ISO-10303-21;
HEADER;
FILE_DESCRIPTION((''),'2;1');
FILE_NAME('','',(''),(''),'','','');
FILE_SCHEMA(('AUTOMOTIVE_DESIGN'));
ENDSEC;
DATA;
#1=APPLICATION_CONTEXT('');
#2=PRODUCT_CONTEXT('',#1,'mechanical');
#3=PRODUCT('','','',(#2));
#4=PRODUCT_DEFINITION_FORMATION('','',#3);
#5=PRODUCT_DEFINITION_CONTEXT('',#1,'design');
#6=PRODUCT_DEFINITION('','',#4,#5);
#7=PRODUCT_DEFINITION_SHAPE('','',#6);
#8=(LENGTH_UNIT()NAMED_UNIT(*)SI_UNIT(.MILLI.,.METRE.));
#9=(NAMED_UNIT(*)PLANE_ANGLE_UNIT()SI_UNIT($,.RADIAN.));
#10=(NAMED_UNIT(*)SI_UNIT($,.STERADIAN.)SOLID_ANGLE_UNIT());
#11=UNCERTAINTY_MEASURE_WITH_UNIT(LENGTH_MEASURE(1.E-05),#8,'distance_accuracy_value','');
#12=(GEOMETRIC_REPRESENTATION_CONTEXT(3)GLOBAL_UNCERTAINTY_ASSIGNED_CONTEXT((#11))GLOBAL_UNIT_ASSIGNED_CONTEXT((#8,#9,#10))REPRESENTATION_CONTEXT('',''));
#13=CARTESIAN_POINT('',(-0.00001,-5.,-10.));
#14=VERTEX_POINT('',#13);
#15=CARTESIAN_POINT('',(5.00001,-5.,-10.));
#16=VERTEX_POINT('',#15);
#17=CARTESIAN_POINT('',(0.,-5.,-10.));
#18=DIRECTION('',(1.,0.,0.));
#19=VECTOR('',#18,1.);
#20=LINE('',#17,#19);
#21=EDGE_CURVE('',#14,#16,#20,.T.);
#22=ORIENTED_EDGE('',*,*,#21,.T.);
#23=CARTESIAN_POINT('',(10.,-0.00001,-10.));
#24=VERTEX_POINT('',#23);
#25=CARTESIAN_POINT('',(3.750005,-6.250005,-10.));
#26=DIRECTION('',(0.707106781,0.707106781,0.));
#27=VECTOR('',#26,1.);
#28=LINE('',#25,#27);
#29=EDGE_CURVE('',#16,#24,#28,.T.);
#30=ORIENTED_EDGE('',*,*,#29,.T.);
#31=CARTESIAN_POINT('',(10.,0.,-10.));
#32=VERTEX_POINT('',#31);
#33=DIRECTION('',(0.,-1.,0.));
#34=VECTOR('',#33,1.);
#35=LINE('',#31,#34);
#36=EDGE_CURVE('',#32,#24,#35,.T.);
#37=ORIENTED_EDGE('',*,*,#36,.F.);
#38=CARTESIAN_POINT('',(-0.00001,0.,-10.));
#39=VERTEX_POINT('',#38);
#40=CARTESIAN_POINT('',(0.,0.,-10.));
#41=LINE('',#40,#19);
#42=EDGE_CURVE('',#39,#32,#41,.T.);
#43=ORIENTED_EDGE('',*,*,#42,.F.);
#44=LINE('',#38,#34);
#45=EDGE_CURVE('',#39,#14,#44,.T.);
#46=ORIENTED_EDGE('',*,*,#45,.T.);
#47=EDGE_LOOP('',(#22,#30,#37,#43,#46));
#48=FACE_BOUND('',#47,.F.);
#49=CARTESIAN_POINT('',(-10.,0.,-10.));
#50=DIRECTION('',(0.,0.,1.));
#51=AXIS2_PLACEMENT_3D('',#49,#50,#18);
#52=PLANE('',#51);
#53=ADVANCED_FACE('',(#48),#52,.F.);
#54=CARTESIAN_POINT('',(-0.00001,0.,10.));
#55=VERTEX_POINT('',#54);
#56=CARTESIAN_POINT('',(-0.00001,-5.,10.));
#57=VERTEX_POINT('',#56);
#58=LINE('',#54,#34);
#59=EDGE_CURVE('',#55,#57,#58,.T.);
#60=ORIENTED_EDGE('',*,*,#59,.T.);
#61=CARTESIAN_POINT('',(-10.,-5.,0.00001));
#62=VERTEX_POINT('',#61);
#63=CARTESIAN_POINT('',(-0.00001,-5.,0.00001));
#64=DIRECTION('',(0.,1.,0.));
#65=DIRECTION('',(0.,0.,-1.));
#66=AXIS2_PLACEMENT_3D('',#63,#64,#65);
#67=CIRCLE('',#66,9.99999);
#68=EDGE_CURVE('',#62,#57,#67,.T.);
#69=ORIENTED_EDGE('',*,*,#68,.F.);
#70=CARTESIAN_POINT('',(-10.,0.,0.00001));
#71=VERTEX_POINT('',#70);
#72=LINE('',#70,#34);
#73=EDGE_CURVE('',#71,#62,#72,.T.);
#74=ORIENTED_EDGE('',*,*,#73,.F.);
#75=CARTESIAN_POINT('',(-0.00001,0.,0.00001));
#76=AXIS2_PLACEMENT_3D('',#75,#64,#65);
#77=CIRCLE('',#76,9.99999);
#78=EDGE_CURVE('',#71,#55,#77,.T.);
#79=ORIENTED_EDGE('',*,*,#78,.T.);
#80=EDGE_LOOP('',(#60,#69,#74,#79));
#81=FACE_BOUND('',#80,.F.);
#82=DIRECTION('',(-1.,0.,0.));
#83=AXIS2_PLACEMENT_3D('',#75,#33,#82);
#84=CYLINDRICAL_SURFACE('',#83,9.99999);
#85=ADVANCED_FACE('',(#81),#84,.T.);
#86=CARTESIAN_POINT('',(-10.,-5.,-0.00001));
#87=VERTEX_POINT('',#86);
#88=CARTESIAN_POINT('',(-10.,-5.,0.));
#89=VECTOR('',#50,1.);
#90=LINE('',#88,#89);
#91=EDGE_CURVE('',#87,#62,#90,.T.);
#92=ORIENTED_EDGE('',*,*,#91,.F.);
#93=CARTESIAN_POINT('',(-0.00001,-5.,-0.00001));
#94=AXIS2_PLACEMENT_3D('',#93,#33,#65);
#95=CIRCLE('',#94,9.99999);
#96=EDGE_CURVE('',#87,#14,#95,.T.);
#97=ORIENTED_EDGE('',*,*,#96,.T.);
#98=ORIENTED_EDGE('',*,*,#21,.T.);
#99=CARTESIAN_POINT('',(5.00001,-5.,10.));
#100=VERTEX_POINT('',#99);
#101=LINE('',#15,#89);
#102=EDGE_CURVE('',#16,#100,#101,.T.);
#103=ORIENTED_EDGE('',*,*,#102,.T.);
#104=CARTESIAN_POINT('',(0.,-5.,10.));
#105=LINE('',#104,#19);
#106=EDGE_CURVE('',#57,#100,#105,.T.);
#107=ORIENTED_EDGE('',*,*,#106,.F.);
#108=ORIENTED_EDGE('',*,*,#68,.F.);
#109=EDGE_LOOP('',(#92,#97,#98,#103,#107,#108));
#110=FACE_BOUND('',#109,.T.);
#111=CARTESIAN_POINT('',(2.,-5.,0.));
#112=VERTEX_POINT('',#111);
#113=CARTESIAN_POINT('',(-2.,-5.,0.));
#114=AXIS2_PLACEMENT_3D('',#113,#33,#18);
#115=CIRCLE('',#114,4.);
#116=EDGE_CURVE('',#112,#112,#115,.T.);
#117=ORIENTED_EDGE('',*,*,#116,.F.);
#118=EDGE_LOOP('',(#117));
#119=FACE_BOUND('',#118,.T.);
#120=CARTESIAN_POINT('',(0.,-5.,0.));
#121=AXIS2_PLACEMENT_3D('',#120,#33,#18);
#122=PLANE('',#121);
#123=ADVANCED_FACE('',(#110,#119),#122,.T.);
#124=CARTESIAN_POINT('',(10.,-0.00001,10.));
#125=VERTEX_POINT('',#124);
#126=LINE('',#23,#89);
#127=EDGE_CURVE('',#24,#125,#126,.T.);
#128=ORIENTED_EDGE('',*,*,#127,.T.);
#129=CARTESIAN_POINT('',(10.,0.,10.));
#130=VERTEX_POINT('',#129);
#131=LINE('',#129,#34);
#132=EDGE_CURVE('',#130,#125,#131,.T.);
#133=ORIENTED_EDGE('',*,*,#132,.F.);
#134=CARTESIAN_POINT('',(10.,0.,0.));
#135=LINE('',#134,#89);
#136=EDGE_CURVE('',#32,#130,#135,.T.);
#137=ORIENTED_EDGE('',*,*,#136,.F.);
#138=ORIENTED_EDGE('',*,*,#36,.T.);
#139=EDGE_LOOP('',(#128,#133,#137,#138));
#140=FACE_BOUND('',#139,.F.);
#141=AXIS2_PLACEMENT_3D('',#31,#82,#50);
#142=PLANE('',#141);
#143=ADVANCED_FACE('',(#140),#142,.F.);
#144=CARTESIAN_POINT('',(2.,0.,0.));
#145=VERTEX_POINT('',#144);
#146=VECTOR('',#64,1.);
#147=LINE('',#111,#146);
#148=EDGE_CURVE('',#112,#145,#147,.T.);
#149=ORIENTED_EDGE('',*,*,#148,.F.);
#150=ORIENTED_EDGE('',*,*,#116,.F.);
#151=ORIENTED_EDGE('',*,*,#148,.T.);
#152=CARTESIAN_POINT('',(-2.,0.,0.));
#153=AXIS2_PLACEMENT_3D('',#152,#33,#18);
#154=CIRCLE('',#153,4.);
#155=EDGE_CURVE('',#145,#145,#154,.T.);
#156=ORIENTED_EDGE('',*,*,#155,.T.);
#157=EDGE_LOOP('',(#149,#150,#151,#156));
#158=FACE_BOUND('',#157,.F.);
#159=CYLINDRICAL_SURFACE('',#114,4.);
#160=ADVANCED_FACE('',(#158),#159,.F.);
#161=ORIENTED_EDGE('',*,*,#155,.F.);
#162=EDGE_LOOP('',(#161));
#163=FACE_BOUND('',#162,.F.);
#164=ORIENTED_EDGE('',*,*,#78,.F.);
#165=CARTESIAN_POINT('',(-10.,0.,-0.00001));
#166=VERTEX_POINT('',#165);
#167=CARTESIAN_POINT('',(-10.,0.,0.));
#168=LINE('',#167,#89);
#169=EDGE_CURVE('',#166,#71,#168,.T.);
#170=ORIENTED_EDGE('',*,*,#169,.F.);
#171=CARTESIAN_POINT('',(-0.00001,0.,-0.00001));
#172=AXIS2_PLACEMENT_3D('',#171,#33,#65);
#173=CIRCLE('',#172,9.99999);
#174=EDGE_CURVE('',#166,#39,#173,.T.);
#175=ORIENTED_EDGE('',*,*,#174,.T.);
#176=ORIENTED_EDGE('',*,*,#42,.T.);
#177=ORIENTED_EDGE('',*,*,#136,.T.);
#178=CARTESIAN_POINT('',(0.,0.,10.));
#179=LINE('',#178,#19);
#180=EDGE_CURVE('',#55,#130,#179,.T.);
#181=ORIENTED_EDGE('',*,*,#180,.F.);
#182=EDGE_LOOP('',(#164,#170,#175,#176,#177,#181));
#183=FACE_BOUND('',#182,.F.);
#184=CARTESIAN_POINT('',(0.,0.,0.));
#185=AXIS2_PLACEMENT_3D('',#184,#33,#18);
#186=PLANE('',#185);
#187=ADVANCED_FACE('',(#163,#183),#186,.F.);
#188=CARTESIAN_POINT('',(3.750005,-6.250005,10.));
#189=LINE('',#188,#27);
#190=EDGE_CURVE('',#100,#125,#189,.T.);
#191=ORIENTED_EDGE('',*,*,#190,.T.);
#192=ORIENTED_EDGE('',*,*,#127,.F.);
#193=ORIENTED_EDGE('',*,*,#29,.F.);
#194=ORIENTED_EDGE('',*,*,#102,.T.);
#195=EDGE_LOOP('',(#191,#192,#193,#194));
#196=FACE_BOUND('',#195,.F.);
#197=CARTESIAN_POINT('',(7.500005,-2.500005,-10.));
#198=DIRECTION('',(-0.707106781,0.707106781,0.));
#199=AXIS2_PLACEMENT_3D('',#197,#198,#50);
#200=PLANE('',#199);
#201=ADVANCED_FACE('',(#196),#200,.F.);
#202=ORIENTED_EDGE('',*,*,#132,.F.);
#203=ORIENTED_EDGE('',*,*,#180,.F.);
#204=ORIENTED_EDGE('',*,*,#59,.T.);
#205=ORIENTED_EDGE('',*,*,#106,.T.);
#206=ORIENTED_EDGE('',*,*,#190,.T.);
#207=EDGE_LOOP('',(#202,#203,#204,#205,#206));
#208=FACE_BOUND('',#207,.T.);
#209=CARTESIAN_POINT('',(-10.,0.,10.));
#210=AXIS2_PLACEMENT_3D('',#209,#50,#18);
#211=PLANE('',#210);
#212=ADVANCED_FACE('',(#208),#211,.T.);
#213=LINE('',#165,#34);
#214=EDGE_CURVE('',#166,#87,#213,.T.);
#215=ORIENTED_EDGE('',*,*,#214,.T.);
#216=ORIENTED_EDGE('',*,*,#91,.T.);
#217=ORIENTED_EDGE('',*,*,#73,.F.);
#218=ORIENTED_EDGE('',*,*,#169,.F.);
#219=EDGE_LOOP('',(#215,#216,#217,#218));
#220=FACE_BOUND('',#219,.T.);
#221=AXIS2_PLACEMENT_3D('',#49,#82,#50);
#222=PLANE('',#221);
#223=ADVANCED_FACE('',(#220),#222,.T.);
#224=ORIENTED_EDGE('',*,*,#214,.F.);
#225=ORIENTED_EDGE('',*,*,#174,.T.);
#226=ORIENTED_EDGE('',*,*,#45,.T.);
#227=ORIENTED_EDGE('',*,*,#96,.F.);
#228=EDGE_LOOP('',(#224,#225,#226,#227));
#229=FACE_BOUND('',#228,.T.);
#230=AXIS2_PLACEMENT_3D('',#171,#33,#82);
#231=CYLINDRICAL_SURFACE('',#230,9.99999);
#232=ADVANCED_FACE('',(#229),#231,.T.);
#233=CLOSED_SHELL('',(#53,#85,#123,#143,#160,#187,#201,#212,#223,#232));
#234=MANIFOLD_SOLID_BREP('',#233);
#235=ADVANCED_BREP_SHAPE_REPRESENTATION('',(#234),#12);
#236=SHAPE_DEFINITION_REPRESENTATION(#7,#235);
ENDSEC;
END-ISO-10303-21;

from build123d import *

# Parameters (mm, degrees)
F0_W     = 20
F0_H     = 20
F1_DEPTH = 5
F2_R     = 9.99999
F3_R     = 4
F4_DEPTH = 25
F5_SIZE  = 4.99999


# Not quite as in the source:
# - a fillet or chamfer is up to 0.001 mm smaller than in the source, because OpenCascade refuses the exact size


with BuildPart() as f1:
    # F0 (on Front) → F1 (new body)
    with BuildSketch(Plane.XZ):
        Rectangle(F0_W, F0_H)
    extrude(amount=F1_DEPTH)

    # F2 (radius 10 in the source; OpenCascade refuses exactly that, so slightly less here)
    f2_edges = [f1.edges().sort_by_distance(p)[0] for p in [
        (-10, -2.5, 10),
        (-10, -2.5, -10),
    ]]
    fillet(f2_edges, radius=F2_R)

    # F3 (on face) → F4 (cut)
    with BuildSketch(Plane.XZ.offset(5)):
        with Locations((-2, 0)):
            Circle(F3_R)
    extrude(amount=-F4_DEPTH, mode=Mode.SUBTRACT)

    # F5 (size 5 in the source; OpenCascade refuses exactly that, so slightly less here)
    f5_edges = [f1.edges().sort_by_distance(p)[0] for p in [
        (10, -5, 0),
    ]]
    chamfer(f5_edges, length=F5_SIZE)


solid = f1.part
